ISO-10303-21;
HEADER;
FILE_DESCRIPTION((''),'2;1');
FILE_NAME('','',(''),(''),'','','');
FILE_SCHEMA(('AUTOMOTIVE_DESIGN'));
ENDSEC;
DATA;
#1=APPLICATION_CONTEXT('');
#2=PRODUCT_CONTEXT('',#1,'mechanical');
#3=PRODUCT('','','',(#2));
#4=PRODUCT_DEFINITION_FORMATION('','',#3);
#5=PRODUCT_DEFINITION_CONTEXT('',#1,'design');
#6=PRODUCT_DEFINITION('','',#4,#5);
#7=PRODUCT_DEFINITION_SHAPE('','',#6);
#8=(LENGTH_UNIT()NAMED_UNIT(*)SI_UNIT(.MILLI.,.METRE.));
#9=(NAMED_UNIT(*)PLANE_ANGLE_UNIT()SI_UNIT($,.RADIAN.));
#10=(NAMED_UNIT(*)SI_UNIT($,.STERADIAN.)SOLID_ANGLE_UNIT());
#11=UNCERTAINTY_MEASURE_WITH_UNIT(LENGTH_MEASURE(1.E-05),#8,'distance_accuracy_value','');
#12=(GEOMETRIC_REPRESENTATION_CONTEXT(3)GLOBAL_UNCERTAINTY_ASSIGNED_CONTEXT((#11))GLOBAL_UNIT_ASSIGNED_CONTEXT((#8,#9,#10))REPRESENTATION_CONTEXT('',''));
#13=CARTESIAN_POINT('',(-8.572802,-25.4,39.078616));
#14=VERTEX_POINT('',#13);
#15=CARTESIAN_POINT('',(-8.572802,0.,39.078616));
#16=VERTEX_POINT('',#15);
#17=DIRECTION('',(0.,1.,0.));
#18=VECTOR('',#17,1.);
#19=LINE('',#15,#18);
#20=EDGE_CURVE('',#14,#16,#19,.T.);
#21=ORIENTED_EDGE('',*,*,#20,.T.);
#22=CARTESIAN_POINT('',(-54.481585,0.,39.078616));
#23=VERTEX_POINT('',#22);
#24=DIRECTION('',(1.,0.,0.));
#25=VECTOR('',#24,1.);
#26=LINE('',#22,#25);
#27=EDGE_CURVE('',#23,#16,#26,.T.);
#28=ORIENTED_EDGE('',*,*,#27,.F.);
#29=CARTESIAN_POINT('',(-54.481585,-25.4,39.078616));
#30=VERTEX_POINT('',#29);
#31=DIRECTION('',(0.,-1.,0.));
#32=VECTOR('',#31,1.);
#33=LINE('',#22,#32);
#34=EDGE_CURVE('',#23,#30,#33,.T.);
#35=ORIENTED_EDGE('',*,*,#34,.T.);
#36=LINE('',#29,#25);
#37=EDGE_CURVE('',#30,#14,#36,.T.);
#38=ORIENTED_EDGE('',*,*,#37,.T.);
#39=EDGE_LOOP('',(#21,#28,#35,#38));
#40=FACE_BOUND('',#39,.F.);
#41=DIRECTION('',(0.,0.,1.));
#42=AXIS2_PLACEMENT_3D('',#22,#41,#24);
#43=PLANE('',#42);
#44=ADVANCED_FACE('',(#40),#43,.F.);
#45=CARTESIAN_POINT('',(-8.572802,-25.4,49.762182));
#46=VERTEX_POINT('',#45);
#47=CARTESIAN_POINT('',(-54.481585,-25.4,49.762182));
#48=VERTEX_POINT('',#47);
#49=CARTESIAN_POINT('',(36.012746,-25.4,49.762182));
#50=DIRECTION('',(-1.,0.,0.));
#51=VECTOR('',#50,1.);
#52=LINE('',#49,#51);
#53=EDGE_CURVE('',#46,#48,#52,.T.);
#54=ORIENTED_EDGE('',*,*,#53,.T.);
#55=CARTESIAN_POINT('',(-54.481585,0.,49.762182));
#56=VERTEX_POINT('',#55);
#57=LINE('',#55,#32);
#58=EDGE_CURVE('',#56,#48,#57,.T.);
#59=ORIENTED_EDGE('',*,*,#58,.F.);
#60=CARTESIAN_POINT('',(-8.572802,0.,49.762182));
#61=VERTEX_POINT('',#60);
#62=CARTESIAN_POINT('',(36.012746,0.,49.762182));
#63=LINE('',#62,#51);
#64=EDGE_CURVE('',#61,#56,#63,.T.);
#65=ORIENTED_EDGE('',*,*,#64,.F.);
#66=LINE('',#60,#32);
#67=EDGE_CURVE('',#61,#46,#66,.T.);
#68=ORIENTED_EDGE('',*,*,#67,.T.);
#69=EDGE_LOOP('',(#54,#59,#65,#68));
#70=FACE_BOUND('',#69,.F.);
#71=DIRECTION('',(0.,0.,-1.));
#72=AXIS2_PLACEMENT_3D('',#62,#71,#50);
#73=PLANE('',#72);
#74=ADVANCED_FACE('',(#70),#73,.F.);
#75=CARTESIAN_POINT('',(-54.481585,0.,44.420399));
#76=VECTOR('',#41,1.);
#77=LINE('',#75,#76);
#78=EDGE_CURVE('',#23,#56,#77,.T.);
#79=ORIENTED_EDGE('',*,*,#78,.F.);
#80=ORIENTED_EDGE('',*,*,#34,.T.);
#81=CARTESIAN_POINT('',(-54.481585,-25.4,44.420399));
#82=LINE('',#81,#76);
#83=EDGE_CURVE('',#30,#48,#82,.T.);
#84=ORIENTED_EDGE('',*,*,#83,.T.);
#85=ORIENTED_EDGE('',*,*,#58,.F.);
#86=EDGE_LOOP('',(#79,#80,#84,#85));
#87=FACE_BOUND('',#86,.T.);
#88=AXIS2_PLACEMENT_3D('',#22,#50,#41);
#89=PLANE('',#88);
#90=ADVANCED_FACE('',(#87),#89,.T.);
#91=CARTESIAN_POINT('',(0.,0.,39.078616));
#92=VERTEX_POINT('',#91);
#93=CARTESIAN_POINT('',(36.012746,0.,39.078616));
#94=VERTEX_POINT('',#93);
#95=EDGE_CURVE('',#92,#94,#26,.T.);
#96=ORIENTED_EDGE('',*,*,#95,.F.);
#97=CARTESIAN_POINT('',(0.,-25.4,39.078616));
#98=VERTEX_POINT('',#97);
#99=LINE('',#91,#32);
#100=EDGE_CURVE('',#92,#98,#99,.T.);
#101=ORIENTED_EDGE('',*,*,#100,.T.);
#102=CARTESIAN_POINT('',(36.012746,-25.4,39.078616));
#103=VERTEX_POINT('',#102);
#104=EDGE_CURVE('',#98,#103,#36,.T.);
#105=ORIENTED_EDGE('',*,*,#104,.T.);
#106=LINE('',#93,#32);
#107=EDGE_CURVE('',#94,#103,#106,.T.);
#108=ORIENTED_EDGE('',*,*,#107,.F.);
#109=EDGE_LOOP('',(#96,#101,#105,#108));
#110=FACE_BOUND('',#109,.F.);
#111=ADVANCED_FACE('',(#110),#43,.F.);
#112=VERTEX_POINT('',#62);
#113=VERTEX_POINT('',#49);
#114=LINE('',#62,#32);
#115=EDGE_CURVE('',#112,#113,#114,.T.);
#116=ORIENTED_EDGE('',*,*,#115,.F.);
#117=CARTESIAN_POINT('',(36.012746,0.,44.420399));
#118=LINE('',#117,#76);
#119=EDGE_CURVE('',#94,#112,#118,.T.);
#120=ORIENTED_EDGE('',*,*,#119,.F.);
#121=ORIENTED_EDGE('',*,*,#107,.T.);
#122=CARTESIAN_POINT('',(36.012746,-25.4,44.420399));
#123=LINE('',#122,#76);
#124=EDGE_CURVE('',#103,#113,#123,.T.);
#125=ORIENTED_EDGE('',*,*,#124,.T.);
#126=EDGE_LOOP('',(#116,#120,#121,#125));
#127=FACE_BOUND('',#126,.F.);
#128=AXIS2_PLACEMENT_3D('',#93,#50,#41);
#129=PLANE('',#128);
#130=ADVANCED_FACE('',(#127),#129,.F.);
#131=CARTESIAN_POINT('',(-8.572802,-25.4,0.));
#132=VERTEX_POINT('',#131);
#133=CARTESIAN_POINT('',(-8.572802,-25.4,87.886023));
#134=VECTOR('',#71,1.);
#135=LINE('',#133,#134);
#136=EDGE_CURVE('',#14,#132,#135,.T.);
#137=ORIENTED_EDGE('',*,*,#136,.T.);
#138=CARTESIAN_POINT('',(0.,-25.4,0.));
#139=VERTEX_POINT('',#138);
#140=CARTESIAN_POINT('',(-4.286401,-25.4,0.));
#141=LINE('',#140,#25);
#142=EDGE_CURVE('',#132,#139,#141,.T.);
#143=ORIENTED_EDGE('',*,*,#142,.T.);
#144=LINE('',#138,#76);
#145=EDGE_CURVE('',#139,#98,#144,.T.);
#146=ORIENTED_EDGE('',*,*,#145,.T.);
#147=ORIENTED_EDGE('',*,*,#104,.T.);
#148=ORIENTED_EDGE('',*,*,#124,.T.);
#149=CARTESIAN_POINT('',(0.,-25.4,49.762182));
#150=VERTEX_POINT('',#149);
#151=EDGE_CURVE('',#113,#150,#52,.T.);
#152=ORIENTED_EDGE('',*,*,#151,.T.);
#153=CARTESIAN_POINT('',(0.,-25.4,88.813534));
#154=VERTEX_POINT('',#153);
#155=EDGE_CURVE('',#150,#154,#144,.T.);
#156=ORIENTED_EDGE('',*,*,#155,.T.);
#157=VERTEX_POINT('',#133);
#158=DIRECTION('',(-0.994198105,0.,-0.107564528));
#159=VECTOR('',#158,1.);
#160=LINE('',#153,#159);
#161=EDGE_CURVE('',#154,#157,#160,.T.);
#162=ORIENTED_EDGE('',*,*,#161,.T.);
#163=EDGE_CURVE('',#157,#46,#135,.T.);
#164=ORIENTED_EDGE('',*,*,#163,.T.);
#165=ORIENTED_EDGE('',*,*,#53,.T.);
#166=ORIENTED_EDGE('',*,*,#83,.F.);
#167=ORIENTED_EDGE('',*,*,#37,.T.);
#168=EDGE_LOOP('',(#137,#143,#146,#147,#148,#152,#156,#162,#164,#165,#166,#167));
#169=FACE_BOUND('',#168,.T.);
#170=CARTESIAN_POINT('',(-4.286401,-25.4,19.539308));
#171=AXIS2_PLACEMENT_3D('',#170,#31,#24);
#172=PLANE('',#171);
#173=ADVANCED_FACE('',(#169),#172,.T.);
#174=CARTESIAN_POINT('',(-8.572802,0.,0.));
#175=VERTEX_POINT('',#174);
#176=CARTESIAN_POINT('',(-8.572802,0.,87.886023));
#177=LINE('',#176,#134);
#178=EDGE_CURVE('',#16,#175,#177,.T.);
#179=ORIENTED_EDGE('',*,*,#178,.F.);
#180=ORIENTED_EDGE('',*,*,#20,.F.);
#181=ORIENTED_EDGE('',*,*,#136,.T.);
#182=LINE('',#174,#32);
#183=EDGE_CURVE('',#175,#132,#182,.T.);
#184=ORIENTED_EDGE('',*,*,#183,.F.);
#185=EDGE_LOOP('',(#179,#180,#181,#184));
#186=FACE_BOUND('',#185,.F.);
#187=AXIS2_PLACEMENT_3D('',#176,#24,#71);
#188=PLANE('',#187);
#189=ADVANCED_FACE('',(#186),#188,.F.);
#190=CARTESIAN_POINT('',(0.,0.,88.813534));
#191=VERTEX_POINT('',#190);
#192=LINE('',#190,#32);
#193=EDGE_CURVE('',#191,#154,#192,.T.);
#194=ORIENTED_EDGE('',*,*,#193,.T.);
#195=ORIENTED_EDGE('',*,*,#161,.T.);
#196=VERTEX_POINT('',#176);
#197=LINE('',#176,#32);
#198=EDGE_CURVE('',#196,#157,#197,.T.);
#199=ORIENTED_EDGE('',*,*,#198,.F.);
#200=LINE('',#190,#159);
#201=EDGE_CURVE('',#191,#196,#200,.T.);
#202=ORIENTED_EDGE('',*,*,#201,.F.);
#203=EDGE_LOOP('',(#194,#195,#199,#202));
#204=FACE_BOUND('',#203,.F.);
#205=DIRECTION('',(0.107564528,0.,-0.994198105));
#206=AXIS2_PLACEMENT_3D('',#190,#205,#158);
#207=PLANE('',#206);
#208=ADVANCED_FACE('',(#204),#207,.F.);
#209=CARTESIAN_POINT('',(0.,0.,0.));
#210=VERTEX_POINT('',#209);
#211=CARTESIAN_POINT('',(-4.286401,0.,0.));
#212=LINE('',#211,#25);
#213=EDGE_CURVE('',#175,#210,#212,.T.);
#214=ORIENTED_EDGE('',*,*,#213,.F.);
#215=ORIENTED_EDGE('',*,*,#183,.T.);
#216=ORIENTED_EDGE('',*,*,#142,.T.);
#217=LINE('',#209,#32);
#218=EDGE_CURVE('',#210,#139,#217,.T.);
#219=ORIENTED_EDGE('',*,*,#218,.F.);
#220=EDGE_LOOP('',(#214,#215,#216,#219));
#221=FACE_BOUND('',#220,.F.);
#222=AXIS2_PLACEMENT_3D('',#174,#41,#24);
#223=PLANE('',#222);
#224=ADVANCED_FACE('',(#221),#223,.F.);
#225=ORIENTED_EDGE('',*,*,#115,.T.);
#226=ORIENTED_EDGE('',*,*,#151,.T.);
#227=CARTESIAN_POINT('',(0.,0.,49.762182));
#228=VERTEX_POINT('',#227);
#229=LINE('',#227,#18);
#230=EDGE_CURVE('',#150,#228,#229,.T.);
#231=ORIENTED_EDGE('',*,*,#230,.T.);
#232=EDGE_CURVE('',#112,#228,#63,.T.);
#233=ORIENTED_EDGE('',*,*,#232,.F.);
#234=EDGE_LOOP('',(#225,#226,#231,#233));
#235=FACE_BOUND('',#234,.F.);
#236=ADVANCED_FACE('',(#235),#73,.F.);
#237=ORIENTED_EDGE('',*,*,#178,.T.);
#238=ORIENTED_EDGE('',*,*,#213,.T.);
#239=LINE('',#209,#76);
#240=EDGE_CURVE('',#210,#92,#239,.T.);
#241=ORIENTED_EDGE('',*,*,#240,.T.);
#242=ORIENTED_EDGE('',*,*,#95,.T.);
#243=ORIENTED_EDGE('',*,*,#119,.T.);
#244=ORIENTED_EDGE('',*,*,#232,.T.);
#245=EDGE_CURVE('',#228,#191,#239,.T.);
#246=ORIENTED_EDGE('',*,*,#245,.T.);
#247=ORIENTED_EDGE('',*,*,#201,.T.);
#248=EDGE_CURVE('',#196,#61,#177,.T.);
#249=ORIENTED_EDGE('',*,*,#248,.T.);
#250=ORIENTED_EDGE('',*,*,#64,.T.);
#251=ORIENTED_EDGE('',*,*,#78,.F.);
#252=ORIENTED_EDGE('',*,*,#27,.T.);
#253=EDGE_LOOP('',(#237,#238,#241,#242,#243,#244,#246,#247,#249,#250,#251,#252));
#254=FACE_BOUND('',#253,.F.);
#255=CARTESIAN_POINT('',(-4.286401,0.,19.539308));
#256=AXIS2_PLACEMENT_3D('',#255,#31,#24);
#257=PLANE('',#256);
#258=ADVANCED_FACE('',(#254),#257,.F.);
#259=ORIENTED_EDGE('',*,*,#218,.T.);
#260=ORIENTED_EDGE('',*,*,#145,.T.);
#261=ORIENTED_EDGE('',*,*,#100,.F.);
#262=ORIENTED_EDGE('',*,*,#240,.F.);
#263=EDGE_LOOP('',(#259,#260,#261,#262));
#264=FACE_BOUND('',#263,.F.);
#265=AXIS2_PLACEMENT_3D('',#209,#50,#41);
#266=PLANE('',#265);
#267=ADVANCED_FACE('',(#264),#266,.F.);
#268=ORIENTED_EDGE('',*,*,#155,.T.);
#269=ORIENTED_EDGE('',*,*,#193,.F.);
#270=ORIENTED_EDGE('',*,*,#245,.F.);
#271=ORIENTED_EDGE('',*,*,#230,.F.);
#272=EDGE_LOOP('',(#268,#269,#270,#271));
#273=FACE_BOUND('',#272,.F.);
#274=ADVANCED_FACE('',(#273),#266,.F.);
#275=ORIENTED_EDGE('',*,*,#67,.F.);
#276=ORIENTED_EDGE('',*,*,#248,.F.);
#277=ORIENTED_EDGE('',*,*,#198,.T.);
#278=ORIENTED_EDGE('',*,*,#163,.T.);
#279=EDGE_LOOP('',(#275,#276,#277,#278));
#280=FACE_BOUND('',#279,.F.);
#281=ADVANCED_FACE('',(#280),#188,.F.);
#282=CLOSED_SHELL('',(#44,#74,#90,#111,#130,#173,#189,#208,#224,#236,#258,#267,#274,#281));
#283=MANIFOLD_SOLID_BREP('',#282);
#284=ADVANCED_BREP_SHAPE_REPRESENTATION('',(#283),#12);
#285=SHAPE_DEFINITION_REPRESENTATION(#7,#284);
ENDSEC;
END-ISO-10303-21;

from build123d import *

# Parameters (mm, degrees)
F0_W     = 45.9087826312
F0_H     = 10.6835663319
F0_W_2   = 8.5728019476
F0_W_3   = 36.0127463937
F1_DEPTH = 25.4
F0_H_2   = 39.0786156058
F2_DEPTH = 25.4


# Not quite as in the source:
# - a feature names something its author has since deleted; it is built from what else it names


with BuildPart() as f1:
    # F0 (on Front) → F1 (new body)
    with BuildSketch(Plane.XZ):
        with Locations((-31.5271932632, 44.4203987718)):
            Rectangle(F0_W, F0_H)
        with Locations((-4.2864009738, 44.4203987718)):
            Rectangle(F0_W_2, F0_H)
        with Locations((18.0063731968, 44.4203987718)):
            Rectangle(F0_W_3, F0_H)
    extrude(amount=F1_DEPTH)

    # F0 (on Front) → F2 (join)
    with BuildSketch(Plane.XZ):
        with Locations((-4.2864009738, 19.5393078029)):
            Rectangle(F0_W_2, F0_H_2)
        with Locations((-4.2864009738, 44.4203987718)):
            Rectangle(F0_W_2, F0_H)
        Polygon((-8.5728019476, 87.886022841), (-8.5728019476, 49.7621819377), (0, 49.7621819377), (0, 88.8135335598), align=None)
    extrude(amount=F2_DEPTH)


solid = f1.part
